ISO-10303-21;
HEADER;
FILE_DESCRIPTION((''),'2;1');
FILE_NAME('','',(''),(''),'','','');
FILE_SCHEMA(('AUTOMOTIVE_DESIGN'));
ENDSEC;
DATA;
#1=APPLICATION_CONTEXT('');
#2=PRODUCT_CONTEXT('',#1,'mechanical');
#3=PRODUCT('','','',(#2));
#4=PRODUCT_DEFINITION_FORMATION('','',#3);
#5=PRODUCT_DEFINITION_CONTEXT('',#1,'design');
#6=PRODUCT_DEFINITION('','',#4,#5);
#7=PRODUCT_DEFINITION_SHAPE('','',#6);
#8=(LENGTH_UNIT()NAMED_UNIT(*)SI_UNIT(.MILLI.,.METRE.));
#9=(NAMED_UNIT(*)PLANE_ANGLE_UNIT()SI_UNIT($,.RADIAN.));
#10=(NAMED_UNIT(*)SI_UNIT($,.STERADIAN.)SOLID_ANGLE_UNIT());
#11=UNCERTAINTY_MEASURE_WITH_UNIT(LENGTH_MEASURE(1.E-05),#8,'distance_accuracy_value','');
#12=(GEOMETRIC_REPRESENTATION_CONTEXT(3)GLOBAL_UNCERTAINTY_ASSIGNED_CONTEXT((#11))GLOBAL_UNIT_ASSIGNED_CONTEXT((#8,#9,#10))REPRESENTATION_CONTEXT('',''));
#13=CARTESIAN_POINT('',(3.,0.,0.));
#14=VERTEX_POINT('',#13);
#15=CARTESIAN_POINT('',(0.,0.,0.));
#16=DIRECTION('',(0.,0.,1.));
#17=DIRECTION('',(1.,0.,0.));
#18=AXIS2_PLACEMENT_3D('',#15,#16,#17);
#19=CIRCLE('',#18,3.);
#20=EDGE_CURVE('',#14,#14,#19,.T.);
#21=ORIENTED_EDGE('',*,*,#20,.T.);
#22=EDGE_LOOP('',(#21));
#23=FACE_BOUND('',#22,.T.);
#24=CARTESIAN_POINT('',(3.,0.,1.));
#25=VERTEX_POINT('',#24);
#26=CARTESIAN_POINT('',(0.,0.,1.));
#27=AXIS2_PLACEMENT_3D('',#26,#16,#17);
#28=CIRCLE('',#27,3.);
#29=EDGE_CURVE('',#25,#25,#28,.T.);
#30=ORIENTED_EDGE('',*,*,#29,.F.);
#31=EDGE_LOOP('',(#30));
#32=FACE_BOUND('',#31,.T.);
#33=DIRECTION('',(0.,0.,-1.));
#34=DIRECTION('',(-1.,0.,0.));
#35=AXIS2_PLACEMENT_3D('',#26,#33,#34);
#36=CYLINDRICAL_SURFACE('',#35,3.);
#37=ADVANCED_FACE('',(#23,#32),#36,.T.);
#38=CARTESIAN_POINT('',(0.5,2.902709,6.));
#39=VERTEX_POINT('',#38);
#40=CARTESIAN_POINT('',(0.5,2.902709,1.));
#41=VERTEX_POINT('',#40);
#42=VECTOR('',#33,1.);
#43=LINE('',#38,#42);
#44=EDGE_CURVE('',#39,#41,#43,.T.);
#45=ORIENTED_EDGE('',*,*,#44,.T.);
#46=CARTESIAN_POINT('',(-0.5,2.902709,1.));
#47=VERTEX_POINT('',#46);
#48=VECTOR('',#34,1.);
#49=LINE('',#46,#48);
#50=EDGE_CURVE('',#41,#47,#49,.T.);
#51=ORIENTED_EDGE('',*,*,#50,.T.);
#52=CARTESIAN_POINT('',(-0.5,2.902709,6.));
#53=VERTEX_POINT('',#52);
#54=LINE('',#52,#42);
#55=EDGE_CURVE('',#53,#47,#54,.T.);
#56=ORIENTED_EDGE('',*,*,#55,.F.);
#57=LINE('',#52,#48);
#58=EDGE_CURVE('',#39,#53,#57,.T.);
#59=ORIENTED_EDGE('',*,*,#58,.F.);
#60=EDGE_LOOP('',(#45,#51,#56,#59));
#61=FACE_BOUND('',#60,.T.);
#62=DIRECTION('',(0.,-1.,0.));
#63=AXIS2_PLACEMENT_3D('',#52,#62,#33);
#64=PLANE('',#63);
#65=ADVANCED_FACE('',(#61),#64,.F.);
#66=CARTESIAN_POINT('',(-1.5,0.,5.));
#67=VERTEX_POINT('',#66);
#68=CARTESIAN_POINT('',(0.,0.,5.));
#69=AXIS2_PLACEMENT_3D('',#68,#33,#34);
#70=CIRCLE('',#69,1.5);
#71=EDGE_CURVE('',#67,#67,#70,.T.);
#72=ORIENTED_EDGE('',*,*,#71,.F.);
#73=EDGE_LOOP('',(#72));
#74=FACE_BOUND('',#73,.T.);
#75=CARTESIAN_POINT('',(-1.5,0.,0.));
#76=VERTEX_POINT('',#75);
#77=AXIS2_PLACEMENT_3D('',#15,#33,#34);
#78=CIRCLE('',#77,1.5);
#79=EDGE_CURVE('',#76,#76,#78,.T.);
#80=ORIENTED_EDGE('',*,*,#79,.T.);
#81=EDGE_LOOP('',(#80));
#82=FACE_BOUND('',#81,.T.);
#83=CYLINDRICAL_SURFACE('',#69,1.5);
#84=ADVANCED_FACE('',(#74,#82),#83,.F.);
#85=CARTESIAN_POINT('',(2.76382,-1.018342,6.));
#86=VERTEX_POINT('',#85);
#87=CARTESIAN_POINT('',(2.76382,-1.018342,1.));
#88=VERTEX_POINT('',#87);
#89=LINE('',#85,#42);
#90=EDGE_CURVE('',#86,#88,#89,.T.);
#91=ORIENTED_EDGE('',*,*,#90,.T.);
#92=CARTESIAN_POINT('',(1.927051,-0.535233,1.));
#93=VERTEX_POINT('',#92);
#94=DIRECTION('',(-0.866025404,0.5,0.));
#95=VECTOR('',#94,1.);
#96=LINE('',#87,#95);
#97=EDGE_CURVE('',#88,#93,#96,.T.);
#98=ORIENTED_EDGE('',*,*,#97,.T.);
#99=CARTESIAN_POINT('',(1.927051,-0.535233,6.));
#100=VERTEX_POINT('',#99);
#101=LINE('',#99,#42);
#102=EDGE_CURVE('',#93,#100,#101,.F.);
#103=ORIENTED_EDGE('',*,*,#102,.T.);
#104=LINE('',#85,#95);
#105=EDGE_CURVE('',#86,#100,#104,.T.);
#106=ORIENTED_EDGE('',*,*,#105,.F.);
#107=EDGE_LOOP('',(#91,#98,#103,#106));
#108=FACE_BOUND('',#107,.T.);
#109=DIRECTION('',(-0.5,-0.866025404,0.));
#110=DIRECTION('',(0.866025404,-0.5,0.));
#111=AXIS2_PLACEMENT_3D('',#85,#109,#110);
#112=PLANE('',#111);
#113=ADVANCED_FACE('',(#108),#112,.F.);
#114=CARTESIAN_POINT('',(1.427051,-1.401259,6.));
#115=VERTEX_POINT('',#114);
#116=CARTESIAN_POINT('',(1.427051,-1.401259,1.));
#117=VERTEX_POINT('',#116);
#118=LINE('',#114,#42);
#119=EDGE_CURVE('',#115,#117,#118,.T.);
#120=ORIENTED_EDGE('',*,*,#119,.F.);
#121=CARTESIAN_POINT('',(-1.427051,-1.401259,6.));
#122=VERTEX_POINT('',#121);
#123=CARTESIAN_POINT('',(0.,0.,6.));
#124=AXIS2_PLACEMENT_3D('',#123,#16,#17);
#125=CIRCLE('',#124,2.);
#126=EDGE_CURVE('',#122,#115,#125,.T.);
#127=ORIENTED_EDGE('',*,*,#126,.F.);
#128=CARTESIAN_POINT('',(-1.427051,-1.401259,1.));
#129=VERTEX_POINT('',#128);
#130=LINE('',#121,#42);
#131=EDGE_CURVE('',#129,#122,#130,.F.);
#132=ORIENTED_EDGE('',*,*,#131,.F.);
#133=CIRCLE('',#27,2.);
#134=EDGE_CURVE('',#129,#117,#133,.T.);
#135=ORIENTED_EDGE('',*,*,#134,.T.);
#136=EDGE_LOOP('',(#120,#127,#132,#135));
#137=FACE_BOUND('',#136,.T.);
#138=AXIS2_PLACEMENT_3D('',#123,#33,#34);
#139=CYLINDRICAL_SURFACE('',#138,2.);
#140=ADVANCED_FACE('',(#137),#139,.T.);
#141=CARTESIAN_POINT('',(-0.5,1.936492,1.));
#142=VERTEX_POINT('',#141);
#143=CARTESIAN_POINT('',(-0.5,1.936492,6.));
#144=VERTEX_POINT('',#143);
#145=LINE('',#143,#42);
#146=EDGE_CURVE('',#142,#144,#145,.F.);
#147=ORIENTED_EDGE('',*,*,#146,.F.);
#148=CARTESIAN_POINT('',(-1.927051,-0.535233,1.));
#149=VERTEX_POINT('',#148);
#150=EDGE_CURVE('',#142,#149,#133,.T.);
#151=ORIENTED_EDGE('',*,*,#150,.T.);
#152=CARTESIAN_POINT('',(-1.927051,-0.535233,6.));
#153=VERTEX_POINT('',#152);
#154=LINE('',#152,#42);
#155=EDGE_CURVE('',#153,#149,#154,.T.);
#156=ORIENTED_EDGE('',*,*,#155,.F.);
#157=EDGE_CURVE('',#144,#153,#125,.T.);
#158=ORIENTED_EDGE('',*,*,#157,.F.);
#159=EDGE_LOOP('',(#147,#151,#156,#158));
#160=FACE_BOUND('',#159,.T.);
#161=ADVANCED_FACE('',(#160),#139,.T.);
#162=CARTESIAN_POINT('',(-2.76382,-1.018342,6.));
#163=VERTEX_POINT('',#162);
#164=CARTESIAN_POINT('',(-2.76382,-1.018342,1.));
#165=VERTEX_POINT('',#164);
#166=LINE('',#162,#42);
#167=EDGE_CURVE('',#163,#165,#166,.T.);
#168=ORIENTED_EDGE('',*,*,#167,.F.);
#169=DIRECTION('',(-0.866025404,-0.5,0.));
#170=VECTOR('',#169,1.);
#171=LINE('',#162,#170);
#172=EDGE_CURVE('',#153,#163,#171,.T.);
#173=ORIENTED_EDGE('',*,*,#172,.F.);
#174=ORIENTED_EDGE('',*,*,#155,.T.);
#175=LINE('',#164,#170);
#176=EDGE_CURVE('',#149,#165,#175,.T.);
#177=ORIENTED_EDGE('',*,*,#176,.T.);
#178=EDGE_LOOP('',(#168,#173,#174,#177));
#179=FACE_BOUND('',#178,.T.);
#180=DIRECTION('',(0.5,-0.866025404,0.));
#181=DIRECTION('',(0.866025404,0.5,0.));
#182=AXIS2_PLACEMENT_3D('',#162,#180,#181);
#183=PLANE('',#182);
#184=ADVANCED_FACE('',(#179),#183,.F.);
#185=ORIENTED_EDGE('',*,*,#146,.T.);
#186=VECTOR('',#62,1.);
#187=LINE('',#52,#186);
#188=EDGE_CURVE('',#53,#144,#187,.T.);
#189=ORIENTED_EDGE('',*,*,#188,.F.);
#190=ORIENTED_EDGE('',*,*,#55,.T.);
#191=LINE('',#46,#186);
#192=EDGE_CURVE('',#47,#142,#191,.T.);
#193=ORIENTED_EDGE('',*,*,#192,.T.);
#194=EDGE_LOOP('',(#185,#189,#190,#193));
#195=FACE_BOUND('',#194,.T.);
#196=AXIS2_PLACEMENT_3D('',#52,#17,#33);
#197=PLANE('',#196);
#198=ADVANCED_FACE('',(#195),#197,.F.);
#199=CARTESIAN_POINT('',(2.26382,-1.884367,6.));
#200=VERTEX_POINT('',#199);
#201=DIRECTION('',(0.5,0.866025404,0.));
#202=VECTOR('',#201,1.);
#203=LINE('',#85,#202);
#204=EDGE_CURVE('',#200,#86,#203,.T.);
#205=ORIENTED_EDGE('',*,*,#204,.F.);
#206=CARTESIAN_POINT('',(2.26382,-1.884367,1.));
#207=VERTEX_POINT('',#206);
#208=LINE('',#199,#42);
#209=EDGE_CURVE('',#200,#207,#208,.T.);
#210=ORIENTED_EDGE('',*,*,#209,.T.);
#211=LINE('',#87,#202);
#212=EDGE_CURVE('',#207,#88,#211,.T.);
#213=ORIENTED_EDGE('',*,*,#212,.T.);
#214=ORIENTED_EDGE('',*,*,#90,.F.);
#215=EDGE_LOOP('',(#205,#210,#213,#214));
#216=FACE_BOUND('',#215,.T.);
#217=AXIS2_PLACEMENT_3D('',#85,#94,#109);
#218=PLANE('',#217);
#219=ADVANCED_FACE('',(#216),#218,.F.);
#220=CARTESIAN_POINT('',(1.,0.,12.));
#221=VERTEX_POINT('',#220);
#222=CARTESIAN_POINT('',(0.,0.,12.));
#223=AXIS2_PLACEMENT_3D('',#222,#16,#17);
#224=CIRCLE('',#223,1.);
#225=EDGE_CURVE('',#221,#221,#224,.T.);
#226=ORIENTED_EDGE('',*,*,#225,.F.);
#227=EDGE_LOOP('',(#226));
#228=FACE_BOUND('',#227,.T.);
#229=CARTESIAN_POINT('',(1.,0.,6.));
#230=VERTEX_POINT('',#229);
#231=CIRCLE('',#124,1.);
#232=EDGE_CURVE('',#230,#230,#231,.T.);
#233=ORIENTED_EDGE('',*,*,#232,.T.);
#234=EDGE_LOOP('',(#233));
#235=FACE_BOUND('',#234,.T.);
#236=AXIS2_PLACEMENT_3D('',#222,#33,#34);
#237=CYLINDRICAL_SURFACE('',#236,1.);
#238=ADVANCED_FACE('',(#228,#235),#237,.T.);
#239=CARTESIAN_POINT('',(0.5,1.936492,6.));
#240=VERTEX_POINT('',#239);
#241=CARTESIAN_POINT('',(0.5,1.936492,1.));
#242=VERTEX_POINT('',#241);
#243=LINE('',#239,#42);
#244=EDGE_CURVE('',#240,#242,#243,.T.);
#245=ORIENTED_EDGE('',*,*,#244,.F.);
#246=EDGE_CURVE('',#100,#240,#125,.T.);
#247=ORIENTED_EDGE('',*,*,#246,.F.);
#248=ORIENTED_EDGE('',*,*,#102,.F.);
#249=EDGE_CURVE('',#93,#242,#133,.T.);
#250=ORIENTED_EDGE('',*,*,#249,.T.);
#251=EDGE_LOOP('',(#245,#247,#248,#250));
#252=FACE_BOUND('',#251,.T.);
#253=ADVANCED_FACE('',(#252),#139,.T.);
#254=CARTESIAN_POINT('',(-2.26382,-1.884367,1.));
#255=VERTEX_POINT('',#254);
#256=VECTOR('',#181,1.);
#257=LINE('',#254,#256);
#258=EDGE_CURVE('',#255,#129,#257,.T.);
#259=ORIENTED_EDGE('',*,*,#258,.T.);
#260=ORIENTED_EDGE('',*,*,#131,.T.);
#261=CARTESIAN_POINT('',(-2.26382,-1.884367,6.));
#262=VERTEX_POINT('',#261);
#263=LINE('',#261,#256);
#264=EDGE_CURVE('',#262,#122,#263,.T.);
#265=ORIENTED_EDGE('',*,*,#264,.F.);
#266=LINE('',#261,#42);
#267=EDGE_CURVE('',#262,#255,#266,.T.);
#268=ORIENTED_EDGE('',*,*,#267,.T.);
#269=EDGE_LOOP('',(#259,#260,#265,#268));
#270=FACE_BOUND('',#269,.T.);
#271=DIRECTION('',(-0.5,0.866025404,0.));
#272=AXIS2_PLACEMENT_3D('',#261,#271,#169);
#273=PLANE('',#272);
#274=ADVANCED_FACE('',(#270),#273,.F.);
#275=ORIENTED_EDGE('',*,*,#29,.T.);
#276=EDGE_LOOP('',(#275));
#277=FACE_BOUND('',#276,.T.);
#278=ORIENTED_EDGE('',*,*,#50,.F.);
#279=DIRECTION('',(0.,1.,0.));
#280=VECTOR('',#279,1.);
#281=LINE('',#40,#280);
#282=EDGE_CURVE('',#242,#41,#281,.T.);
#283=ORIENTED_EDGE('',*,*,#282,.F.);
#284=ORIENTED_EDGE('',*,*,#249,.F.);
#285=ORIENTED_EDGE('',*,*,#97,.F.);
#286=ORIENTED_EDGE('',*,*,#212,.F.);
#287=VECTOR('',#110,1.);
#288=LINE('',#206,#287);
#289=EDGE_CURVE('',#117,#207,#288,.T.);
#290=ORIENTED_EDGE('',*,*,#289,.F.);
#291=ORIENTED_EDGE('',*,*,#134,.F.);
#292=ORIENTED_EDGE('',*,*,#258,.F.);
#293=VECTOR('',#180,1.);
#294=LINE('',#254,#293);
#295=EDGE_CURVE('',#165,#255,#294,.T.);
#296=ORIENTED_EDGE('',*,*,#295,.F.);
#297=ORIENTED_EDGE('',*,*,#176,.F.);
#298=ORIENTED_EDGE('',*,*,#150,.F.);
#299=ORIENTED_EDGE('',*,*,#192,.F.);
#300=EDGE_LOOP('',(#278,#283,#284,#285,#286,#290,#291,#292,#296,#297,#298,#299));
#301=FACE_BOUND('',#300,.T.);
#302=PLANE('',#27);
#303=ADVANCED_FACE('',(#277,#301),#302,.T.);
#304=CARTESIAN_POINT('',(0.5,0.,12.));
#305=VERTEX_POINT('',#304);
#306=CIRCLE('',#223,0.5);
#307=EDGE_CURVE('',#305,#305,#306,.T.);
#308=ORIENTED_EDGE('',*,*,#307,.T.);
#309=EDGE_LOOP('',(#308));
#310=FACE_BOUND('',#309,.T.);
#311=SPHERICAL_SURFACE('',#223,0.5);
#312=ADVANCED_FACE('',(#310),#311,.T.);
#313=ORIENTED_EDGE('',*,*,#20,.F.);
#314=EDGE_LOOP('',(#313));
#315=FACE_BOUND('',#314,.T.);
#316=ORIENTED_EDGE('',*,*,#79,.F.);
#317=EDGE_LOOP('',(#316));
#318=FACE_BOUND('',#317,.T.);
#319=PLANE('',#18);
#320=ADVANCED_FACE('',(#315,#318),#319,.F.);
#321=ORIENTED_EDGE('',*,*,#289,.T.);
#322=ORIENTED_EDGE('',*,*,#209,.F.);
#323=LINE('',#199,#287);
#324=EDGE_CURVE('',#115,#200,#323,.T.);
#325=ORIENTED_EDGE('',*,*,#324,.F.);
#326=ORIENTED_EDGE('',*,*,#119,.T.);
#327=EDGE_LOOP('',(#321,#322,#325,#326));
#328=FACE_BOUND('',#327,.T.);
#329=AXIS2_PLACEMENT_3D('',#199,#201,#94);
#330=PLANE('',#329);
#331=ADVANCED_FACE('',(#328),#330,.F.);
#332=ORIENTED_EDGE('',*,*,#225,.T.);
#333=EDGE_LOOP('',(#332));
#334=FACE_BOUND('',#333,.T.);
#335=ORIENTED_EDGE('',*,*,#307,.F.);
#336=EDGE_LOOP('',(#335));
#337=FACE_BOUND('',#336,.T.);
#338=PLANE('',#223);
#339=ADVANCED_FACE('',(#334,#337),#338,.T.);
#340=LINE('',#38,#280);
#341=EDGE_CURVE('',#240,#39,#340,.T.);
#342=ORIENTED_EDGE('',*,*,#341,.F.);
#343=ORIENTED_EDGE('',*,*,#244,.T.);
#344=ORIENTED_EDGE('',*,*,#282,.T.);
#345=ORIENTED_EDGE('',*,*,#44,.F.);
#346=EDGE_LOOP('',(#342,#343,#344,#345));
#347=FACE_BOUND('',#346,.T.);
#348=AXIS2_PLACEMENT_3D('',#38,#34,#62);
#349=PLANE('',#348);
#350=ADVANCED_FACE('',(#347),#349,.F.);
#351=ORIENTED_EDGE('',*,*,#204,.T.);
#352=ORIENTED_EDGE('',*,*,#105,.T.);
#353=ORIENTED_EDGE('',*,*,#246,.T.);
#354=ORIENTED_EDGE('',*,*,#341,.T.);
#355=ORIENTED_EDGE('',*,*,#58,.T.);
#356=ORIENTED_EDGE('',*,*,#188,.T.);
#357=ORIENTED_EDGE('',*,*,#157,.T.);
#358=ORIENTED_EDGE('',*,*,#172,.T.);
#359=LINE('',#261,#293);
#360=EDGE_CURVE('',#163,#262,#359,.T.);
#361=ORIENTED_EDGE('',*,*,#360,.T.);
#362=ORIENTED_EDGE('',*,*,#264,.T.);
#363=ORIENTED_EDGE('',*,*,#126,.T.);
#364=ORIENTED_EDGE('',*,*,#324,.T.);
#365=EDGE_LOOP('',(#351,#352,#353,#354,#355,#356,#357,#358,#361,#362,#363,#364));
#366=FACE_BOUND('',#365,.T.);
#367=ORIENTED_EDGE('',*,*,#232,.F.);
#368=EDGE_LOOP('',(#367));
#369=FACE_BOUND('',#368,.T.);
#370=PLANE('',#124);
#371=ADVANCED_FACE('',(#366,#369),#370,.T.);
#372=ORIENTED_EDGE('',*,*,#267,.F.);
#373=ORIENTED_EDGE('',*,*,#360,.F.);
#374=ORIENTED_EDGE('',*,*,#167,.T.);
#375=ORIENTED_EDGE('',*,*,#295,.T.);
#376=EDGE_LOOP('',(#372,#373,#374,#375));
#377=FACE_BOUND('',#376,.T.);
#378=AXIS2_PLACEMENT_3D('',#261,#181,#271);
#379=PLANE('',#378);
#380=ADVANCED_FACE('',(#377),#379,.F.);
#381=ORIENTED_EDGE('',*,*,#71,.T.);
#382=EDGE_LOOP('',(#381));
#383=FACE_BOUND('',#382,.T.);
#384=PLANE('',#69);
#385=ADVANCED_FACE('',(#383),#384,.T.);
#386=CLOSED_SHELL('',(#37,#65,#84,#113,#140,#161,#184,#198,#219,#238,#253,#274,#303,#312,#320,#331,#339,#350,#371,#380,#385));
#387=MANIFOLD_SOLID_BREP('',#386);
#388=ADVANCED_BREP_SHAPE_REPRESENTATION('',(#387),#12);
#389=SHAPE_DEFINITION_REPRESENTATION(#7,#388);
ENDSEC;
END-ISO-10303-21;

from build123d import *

# Parameters (mm, degrees)
SKETCH1_R           = 3
BOSS_EXTRUDE1_DEPTH = 1
SKETCH2_R           = 2
BOSS_EXTRUDE2_DEPTH = 5
SKETCH3_R           = 1
BOSS_EXTRUDE3_DEPTH = 6
SKETCH4_R           = 0.5
BOSS_EXTRUDE4_DEPTH = 0.5
FILLET2_R           = 0.5
SKETCH5_W           = 1
SKETCH5_H           = 1.914506357
BOSS_EXTRUDE5_DEPTH = 5
CIRPATTERN1_COUNT   = 3
SKETCH6_R           = 1.5
CUT_EXTRUDE1_DEPTH  = 5


with BuildPart() as part:
    # Sketch1 → Boss-Extrude1 (new body)
    with BuildSketch(Plane.XY):
        Circle(SKETCH1_R)
    extrude(amount=BOSS_EXTRUDE1_DEPTH)

    # Sketch2 → Boss-Extrude2 (add)
    with BuildSketch(Plane.XY.offset(1)):
        Circle(SKETCH2_R)
    extrude(amount=BOSS_EXTRUDE2_DEPTH)

    # Sketch3 → Boss-Extrude3 (add)
    with BuildSketch(Plane.XY.offset(6)):
        Circle(SKETCH3_R)
    extrude(amount=BOSS_EXTRUDE3_DEPTH)

    # Sketch4 → Boss-Extrude4 (add)
    with BuildSketch(Plane.XY.offset(12)):
        Circle(SKETCH4_R)
    extrude(amount=BOSS_EXTRUDE4_DEPTH)

    # Fillet2
    fillet2_edges = [part.edges().sort_by_distance(p)[0] for p in [
        (-0.5, 0, 12.5),
    ]]
    fillet(fillet2_edges, radius=FILLET2_R - 0.0001)  # a hair under: the kernel refuses the full size

    # Sketch5 → Boss-Extrude5 (add)
    with BuildSketch(Plane.XY.offset(1)):
        with Locations((0, 1.945455643)):
            Rectangle(SKETCH5_W, SKETCH5_H)
    boss_extrude5 = extrude(amount=BOSS_EXTRUDE5_DEPTH)

    # CirPattern1: Boss-Extrude5 ×3 about axis
    cirpattern1_axis = Axis((0, 0, 0), (0, 0, 1))
    for i in range(1, CIRPATTERN1_COUNT):
        add(boss_extrude5.rotate(cirpattern1_axis, i * 360 / CIRPATTERN1_COUNT))

    # Sketch6 → Cut-Extrude1 (cut)
    with BuildSketch(Plane(origin=(0, 0, 0), x_dir=(-1, 0, 0), z_dir=(0, 0, -1))):
        Circle(SKETCH6_R)
    extrude(amount=-CUT_EXTRUDE1_DEPTH, mode=Mode.SUBTRACT)


solid = part.part
